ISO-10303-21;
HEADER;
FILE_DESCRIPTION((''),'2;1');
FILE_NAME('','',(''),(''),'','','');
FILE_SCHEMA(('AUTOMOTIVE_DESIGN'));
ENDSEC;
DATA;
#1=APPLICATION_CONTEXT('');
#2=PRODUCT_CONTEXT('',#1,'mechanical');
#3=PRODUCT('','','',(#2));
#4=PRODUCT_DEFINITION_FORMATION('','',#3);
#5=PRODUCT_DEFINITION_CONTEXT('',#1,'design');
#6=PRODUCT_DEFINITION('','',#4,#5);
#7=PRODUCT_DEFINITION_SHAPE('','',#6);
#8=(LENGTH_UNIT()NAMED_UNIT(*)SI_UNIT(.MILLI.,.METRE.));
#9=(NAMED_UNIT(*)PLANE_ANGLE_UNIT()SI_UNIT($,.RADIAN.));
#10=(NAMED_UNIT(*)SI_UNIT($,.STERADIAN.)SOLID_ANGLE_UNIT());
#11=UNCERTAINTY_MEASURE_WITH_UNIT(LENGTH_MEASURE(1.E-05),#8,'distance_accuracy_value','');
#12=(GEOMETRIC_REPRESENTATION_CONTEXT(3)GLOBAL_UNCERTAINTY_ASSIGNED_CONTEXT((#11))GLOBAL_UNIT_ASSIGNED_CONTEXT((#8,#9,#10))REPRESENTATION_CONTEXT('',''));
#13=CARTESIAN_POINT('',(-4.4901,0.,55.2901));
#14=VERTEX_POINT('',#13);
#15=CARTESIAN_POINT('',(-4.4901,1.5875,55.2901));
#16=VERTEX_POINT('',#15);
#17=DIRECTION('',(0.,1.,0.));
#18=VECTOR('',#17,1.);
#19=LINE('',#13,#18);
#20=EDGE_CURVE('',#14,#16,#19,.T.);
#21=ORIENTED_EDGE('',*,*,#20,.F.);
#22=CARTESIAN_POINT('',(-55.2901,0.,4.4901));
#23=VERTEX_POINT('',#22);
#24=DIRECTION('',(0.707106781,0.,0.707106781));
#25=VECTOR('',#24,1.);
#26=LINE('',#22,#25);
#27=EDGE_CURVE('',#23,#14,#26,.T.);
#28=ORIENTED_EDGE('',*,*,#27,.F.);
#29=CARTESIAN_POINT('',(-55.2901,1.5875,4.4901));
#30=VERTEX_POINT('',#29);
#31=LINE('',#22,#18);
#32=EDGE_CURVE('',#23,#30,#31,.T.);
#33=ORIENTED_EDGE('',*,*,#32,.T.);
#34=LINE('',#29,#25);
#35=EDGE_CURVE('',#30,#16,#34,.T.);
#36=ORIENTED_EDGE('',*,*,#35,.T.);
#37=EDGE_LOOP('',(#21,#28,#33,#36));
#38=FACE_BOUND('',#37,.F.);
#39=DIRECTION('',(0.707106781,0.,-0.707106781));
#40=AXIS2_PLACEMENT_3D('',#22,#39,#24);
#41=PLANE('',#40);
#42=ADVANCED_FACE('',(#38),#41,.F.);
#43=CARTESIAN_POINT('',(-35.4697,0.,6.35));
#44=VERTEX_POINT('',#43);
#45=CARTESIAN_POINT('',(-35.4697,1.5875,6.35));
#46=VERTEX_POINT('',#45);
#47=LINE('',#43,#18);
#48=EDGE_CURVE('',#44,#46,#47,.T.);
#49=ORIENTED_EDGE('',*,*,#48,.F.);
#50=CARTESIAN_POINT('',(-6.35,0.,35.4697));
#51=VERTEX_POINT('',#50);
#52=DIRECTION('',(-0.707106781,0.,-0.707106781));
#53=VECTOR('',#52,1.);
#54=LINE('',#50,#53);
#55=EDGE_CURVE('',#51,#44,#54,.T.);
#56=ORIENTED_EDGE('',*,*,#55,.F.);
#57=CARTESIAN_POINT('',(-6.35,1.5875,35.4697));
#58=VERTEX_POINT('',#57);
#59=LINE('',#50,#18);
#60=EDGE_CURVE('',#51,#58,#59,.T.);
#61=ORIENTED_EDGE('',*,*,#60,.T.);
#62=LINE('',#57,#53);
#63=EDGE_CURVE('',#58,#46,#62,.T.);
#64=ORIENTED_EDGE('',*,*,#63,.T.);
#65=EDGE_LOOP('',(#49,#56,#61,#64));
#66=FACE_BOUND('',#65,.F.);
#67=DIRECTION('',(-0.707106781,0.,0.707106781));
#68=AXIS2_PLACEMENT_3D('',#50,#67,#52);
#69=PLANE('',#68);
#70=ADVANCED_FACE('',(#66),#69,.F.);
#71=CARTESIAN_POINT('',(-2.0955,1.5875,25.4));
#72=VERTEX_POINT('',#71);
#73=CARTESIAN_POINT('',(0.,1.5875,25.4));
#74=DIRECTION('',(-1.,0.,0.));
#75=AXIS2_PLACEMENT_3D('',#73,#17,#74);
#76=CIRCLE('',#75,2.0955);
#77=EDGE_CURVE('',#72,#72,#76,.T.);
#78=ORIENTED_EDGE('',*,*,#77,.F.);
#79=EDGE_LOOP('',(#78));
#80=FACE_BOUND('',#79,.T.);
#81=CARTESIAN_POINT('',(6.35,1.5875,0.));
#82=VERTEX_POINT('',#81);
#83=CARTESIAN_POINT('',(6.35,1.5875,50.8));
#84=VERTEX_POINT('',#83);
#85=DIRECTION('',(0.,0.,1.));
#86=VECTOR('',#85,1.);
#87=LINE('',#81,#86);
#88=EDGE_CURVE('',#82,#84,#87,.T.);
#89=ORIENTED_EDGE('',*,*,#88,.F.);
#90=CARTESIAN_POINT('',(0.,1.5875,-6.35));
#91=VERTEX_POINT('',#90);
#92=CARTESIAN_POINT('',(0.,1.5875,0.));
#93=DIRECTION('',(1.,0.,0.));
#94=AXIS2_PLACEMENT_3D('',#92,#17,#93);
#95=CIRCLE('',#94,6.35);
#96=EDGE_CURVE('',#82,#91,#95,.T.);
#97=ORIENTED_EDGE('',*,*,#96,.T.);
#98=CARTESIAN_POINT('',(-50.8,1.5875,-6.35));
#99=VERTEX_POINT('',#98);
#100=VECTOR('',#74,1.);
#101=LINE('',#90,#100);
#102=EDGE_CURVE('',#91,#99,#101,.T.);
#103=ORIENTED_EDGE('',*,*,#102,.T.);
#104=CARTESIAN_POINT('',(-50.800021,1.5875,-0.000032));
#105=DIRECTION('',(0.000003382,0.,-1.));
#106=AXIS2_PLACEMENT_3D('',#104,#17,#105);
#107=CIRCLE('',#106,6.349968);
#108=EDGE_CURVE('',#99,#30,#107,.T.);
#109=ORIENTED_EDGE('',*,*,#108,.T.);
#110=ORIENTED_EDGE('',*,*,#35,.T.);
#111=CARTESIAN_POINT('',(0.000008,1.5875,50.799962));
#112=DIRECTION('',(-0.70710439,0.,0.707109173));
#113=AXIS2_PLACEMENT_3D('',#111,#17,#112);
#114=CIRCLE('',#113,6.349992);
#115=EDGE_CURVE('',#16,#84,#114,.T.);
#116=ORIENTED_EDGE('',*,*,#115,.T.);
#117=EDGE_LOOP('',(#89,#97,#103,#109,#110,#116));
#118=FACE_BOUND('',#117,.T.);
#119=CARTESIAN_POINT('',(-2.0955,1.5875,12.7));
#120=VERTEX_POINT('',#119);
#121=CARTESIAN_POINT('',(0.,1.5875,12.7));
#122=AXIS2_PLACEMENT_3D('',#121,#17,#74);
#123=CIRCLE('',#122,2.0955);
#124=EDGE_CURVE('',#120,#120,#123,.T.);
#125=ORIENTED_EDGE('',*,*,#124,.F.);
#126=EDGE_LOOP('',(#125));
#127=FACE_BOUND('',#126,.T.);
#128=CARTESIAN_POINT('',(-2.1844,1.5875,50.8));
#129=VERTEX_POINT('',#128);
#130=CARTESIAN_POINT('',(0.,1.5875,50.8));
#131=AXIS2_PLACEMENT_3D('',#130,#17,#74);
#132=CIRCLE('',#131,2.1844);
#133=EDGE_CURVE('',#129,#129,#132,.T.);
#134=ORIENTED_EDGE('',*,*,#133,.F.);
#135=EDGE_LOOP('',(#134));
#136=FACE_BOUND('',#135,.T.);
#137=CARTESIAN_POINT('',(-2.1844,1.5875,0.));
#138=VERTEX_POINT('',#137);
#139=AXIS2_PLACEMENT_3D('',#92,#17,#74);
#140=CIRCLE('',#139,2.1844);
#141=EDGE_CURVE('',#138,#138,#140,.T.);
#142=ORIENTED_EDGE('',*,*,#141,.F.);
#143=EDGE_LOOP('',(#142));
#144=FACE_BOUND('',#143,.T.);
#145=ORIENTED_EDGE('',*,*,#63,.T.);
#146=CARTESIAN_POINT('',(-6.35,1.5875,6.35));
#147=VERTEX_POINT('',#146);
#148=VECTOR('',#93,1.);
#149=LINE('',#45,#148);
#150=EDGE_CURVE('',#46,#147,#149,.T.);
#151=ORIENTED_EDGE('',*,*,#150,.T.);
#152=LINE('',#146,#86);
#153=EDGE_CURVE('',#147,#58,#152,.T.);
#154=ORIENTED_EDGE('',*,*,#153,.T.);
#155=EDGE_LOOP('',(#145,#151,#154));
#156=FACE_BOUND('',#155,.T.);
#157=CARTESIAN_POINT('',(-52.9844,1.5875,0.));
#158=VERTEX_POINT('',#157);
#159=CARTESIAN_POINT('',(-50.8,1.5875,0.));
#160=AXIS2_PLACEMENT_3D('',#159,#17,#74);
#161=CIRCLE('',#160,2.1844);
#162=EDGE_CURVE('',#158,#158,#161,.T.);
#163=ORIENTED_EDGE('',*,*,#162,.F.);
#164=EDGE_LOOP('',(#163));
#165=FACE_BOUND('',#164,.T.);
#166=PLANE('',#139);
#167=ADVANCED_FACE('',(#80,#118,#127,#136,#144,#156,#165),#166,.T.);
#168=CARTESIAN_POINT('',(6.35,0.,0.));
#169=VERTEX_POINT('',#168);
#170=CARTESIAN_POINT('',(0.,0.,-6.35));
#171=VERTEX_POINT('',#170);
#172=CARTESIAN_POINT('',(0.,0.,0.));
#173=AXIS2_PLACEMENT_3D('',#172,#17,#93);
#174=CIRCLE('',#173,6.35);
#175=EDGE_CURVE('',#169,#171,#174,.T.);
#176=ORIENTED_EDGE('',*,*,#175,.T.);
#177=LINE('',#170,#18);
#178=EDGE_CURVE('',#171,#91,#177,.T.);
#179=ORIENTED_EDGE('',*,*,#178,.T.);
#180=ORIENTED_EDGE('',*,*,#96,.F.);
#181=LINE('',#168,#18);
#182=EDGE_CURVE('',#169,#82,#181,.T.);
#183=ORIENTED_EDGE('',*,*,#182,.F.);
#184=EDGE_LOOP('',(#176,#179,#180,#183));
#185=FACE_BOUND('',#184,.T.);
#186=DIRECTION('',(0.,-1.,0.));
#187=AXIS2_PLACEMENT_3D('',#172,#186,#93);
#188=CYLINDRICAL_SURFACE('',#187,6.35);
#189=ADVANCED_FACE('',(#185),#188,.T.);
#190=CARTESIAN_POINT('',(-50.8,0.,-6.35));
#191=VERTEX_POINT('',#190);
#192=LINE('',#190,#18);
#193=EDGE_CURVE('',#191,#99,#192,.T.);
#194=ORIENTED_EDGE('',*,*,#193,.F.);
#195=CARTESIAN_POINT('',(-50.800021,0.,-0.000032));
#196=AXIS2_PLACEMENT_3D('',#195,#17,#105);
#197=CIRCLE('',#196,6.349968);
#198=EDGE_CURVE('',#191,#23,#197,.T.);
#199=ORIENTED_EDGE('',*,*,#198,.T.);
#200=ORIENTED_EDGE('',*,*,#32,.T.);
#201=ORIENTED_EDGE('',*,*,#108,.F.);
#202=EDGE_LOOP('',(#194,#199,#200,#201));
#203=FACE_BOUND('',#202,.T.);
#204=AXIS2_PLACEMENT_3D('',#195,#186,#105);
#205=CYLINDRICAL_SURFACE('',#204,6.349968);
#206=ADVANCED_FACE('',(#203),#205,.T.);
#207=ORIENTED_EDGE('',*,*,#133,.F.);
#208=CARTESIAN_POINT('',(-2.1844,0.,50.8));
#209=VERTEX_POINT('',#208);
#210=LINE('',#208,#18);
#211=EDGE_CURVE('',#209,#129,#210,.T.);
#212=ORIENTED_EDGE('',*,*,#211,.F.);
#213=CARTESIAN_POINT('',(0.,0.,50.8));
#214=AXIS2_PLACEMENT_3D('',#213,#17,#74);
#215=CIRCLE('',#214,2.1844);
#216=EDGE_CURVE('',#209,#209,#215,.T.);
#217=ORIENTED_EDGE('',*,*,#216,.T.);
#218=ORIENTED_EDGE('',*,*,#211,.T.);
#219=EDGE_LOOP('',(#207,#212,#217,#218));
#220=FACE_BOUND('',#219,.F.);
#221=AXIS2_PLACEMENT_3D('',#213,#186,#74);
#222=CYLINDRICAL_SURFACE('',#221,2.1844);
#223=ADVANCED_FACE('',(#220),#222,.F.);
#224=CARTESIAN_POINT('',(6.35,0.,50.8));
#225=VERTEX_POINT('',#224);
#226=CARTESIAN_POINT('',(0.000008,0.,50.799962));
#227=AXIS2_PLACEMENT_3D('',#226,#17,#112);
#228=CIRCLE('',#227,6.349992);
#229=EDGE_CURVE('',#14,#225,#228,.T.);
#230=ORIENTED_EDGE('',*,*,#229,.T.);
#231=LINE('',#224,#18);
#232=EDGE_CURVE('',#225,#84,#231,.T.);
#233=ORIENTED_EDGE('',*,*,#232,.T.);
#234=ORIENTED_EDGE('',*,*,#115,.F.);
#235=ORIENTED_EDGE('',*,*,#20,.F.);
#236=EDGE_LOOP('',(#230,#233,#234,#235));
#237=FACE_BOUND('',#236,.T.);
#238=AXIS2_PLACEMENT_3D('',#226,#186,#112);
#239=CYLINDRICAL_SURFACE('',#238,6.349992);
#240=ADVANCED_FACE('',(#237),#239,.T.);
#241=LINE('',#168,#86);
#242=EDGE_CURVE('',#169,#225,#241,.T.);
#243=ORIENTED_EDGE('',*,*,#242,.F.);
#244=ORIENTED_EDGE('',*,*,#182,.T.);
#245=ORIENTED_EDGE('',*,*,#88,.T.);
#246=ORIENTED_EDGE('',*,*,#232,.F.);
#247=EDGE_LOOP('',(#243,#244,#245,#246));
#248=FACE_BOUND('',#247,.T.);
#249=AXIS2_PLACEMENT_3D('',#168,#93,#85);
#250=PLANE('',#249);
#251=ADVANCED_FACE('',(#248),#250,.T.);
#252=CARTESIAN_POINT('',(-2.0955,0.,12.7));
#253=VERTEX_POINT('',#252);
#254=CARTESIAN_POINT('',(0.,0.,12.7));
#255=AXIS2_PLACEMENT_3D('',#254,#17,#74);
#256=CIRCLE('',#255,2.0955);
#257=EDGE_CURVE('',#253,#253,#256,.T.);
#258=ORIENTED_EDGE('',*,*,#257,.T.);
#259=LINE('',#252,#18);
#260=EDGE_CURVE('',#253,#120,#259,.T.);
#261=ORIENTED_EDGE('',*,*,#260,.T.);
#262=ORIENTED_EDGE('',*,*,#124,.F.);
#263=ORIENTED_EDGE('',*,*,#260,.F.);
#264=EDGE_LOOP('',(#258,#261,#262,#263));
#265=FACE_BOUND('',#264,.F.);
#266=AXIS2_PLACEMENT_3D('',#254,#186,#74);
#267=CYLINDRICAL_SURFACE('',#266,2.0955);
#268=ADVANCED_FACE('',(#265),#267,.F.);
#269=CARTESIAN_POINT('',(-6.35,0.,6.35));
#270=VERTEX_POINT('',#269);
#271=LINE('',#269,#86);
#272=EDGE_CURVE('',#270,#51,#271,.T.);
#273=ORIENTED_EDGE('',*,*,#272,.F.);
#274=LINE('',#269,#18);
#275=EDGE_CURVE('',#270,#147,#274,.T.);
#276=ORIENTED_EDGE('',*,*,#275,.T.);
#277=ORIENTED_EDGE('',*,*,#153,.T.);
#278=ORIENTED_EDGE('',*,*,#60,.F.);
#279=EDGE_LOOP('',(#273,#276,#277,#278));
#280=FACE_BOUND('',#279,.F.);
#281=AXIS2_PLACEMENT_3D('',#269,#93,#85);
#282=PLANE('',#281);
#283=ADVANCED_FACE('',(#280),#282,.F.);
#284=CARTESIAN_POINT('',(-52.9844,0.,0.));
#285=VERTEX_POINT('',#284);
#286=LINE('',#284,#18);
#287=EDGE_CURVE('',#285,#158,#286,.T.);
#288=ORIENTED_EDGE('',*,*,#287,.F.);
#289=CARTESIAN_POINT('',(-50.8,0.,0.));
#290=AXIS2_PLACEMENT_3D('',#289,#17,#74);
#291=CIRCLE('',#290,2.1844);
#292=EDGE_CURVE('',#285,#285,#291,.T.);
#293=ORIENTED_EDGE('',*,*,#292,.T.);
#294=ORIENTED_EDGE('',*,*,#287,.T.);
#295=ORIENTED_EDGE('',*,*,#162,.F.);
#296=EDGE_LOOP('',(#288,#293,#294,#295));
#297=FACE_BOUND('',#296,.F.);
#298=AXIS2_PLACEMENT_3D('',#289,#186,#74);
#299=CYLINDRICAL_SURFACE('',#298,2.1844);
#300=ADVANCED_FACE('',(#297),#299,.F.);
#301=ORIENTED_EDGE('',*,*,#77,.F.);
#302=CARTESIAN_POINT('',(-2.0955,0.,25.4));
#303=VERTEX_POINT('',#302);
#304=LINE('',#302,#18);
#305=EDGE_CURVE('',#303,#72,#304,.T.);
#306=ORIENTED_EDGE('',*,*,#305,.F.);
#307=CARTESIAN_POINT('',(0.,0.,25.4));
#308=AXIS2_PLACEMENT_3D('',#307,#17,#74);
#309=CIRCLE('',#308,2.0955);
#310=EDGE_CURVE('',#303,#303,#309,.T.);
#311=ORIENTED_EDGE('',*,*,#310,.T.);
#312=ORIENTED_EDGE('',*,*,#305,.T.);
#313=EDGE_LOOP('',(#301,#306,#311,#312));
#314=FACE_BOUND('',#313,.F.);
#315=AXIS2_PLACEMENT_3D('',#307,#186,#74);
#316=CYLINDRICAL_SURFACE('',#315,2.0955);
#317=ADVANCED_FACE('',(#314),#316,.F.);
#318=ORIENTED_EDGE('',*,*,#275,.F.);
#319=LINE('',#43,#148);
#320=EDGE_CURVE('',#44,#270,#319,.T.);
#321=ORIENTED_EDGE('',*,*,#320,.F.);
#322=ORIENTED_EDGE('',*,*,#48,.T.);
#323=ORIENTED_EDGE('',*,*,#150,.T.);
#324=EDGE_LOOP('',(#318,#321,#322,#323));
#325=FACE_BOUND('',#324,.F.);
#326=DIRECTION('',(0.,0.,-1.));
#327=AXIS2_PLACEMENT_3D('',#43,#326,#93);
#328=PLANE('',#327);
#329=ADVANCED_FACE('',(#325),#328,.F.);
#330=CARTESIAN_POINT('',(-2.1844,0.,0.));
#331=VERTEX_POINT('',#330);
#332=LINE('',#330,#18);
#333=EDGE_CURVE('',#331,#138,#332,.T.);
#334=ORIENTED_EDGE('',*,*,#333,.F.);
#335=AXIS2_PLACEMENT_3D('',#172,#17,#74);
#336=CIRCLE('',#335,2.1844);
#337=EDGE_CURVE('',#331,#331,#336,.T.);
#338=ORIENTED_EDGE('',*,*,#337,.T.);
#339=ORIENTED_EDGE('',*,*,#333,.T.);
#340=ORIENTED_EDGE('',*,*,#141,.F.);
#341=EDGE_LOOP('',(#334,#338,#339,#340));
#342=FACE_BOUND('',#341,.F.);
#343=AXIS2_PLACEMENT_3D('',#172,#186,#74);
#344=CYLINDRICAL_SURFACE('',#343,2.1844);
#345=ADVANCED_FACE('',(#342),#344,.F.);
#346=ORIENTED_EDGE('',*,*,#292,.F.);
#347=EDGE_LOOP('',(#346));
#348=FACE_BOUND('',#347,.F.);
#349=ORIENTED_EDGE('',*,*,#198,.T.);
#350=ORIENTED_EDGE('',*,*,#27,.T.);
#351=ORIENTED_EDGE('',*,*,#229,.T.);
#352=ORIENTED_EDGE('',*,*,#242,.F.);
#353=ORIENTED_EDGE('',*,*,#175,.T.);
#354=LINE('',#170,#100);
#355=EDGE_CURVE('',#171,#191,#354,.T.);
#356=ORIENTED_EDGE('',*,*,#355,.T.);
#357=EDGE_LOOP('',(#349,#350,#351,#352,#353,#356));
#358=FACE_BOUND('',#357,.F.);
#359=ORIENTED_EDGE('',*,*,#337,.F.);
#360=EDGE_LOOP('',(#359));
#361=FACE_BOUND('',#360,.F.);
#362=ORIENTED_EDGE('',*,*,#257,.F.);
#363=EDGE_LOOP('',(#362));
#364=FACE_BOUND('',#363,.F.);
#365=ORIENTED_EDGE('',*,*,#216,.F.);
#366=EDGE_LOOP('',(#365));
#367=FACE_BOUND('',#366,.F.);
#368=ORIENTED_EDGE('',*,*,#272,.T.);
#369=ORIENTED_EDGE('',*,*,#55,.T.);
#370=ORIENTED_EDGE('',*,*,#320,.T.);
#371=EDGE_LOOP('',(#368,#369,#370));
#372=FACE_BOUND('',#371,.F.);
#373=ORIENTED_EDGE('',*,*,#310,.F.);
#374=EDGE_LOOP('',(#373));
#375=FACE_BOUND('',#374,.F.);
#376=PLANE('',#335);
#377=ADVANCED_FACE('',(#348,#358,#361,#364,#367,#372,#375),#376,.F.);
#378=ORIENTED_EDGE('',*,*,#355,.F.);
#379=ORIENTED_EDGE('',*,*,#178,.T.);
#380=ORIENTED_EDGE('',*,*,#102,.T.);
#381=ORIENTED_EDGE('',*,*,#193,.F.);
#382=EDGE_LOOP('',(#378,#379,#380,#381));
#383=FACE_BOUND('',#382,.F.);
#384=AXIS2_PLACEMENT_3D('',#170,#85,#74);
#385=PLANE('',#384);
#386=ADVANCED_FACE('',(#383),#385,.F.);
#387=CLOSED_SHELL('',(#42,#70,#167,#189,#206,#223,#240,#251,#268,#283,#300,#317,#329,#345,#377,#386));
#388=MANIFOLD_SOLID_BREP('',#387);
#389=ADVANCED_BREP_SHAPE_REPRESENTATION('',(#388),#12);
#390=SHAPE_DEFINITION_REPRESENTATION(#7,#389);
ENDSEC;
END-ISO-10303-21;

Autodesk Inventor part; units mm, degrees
ref_plane "YZ Plane" through (0, 0, 0) normal (1, 0, 0) x (0, 1, 0)
ref_plane "XZ Plane" through (0, 0, 0) normal (0, 1, 0) x (-1, 0, 0)
ref_plane "XY Plane" through (0, 0, 0) normal (0, 0, 1) x (1, 0, 0)
sketch "main" plane through (0, 0, 0) normal (0, 0, 1) x (1, 0, 0)
  circle A0 centre (-25.7384, -24.2854) radius 2.1844
  circle A1 centre (-25.7384, 26.5146) radius 2.1844
  circle A2 centre (25.0616, -24.2854) radius 2.1844
  arc A3 (-32.0884, -24.2854) -> (-25.7384, -30.6354) centre (-25.7384, -24.2854) ccw
  arc A4 (25.0616, -30.6354) -> (29.5518, -19.7953) centre (25.0616, -24.2854) ccw
  arc A5 (-21.2482, 31.0047) -> (-32.0884, 26.5146) centre (-25.7384, 26.5146) ccw
  line L0 (-25.7384, -30.6354) -> (25.0616, -30.6354)
  line L1 (-32.0884, -24.2854) -> (-32.0884, 26.5146)
  line L2 (29.5518, -19.7953) -> (-21.2482, 31.0047)
  line L3 (-19.3884, 11.1843) -> (9.7314, -17.9354)
  line L4 (9.7314, -17.9354) -> (-19.3884, -17.9354)
  line L5 (-19.3884, -17.9354) -> (-19.3884, 11.1843)
  circle A6 centre (-25.7384, -11.5854) radius 2.0955
  circle A7 centre (-25.7384, 1.1146) radius 2.0955
  point P0 (-9.8909, -6.4767)
  point P1 (-28.0498, 28.318)
  dimension "d0" = 12.7
  dimension "d1" = 12.7
  dimension "d2" = 12.7
  dimension "d5" = 12.7
  dimension "d6" = 4.191
  dimension "d7" = 4.191
sketch "Sketch1" plane through (0, 0, 0) normal (0, 1, 0) x (-1, 0, 0)
  circle A0 centre (0, 0) radius 2.1844
  circle A1 centre (0, 50.8) radius 2.1844
  circle A2 centre (50.8, 0) radius 2.1844
  arc A3 (-6.35, 0) -> (0, -6.35) centre (0, 0) ccw
  arc A4 (50.8, -6.35) -> (55.2901, 4.4901) centre (50.8, 0) ccw
  arc A5 (4.4901, 55.2901) -> (-6.35, 50.8) centre (0, 50.8) ccw
  line L0 (0, -6.35) -> (50.8, -6.35)
  line L1 (-6.35, 0) -> (-6.35, 50.8)
  line L2 (55.2901, 4.4901) -> (4.4901, 55.2901)
  line L3 (6.35, 35.4697) -> (35.4697, 6.35)
  line L4 (35.4697, 6.35) -> (6.35, 6.35)
  line L5 (6.35, 6.35) -> (6.35, 35.4697)
  circle A6 centre (0, 12.7) radius 2.0955
  circle A7 centre (0, 25.4) radius 2.0955
extrude "Extrusion1" add sketch "Sketch1" along normal blind 1.5875
properties part number "triangle_gusset"
